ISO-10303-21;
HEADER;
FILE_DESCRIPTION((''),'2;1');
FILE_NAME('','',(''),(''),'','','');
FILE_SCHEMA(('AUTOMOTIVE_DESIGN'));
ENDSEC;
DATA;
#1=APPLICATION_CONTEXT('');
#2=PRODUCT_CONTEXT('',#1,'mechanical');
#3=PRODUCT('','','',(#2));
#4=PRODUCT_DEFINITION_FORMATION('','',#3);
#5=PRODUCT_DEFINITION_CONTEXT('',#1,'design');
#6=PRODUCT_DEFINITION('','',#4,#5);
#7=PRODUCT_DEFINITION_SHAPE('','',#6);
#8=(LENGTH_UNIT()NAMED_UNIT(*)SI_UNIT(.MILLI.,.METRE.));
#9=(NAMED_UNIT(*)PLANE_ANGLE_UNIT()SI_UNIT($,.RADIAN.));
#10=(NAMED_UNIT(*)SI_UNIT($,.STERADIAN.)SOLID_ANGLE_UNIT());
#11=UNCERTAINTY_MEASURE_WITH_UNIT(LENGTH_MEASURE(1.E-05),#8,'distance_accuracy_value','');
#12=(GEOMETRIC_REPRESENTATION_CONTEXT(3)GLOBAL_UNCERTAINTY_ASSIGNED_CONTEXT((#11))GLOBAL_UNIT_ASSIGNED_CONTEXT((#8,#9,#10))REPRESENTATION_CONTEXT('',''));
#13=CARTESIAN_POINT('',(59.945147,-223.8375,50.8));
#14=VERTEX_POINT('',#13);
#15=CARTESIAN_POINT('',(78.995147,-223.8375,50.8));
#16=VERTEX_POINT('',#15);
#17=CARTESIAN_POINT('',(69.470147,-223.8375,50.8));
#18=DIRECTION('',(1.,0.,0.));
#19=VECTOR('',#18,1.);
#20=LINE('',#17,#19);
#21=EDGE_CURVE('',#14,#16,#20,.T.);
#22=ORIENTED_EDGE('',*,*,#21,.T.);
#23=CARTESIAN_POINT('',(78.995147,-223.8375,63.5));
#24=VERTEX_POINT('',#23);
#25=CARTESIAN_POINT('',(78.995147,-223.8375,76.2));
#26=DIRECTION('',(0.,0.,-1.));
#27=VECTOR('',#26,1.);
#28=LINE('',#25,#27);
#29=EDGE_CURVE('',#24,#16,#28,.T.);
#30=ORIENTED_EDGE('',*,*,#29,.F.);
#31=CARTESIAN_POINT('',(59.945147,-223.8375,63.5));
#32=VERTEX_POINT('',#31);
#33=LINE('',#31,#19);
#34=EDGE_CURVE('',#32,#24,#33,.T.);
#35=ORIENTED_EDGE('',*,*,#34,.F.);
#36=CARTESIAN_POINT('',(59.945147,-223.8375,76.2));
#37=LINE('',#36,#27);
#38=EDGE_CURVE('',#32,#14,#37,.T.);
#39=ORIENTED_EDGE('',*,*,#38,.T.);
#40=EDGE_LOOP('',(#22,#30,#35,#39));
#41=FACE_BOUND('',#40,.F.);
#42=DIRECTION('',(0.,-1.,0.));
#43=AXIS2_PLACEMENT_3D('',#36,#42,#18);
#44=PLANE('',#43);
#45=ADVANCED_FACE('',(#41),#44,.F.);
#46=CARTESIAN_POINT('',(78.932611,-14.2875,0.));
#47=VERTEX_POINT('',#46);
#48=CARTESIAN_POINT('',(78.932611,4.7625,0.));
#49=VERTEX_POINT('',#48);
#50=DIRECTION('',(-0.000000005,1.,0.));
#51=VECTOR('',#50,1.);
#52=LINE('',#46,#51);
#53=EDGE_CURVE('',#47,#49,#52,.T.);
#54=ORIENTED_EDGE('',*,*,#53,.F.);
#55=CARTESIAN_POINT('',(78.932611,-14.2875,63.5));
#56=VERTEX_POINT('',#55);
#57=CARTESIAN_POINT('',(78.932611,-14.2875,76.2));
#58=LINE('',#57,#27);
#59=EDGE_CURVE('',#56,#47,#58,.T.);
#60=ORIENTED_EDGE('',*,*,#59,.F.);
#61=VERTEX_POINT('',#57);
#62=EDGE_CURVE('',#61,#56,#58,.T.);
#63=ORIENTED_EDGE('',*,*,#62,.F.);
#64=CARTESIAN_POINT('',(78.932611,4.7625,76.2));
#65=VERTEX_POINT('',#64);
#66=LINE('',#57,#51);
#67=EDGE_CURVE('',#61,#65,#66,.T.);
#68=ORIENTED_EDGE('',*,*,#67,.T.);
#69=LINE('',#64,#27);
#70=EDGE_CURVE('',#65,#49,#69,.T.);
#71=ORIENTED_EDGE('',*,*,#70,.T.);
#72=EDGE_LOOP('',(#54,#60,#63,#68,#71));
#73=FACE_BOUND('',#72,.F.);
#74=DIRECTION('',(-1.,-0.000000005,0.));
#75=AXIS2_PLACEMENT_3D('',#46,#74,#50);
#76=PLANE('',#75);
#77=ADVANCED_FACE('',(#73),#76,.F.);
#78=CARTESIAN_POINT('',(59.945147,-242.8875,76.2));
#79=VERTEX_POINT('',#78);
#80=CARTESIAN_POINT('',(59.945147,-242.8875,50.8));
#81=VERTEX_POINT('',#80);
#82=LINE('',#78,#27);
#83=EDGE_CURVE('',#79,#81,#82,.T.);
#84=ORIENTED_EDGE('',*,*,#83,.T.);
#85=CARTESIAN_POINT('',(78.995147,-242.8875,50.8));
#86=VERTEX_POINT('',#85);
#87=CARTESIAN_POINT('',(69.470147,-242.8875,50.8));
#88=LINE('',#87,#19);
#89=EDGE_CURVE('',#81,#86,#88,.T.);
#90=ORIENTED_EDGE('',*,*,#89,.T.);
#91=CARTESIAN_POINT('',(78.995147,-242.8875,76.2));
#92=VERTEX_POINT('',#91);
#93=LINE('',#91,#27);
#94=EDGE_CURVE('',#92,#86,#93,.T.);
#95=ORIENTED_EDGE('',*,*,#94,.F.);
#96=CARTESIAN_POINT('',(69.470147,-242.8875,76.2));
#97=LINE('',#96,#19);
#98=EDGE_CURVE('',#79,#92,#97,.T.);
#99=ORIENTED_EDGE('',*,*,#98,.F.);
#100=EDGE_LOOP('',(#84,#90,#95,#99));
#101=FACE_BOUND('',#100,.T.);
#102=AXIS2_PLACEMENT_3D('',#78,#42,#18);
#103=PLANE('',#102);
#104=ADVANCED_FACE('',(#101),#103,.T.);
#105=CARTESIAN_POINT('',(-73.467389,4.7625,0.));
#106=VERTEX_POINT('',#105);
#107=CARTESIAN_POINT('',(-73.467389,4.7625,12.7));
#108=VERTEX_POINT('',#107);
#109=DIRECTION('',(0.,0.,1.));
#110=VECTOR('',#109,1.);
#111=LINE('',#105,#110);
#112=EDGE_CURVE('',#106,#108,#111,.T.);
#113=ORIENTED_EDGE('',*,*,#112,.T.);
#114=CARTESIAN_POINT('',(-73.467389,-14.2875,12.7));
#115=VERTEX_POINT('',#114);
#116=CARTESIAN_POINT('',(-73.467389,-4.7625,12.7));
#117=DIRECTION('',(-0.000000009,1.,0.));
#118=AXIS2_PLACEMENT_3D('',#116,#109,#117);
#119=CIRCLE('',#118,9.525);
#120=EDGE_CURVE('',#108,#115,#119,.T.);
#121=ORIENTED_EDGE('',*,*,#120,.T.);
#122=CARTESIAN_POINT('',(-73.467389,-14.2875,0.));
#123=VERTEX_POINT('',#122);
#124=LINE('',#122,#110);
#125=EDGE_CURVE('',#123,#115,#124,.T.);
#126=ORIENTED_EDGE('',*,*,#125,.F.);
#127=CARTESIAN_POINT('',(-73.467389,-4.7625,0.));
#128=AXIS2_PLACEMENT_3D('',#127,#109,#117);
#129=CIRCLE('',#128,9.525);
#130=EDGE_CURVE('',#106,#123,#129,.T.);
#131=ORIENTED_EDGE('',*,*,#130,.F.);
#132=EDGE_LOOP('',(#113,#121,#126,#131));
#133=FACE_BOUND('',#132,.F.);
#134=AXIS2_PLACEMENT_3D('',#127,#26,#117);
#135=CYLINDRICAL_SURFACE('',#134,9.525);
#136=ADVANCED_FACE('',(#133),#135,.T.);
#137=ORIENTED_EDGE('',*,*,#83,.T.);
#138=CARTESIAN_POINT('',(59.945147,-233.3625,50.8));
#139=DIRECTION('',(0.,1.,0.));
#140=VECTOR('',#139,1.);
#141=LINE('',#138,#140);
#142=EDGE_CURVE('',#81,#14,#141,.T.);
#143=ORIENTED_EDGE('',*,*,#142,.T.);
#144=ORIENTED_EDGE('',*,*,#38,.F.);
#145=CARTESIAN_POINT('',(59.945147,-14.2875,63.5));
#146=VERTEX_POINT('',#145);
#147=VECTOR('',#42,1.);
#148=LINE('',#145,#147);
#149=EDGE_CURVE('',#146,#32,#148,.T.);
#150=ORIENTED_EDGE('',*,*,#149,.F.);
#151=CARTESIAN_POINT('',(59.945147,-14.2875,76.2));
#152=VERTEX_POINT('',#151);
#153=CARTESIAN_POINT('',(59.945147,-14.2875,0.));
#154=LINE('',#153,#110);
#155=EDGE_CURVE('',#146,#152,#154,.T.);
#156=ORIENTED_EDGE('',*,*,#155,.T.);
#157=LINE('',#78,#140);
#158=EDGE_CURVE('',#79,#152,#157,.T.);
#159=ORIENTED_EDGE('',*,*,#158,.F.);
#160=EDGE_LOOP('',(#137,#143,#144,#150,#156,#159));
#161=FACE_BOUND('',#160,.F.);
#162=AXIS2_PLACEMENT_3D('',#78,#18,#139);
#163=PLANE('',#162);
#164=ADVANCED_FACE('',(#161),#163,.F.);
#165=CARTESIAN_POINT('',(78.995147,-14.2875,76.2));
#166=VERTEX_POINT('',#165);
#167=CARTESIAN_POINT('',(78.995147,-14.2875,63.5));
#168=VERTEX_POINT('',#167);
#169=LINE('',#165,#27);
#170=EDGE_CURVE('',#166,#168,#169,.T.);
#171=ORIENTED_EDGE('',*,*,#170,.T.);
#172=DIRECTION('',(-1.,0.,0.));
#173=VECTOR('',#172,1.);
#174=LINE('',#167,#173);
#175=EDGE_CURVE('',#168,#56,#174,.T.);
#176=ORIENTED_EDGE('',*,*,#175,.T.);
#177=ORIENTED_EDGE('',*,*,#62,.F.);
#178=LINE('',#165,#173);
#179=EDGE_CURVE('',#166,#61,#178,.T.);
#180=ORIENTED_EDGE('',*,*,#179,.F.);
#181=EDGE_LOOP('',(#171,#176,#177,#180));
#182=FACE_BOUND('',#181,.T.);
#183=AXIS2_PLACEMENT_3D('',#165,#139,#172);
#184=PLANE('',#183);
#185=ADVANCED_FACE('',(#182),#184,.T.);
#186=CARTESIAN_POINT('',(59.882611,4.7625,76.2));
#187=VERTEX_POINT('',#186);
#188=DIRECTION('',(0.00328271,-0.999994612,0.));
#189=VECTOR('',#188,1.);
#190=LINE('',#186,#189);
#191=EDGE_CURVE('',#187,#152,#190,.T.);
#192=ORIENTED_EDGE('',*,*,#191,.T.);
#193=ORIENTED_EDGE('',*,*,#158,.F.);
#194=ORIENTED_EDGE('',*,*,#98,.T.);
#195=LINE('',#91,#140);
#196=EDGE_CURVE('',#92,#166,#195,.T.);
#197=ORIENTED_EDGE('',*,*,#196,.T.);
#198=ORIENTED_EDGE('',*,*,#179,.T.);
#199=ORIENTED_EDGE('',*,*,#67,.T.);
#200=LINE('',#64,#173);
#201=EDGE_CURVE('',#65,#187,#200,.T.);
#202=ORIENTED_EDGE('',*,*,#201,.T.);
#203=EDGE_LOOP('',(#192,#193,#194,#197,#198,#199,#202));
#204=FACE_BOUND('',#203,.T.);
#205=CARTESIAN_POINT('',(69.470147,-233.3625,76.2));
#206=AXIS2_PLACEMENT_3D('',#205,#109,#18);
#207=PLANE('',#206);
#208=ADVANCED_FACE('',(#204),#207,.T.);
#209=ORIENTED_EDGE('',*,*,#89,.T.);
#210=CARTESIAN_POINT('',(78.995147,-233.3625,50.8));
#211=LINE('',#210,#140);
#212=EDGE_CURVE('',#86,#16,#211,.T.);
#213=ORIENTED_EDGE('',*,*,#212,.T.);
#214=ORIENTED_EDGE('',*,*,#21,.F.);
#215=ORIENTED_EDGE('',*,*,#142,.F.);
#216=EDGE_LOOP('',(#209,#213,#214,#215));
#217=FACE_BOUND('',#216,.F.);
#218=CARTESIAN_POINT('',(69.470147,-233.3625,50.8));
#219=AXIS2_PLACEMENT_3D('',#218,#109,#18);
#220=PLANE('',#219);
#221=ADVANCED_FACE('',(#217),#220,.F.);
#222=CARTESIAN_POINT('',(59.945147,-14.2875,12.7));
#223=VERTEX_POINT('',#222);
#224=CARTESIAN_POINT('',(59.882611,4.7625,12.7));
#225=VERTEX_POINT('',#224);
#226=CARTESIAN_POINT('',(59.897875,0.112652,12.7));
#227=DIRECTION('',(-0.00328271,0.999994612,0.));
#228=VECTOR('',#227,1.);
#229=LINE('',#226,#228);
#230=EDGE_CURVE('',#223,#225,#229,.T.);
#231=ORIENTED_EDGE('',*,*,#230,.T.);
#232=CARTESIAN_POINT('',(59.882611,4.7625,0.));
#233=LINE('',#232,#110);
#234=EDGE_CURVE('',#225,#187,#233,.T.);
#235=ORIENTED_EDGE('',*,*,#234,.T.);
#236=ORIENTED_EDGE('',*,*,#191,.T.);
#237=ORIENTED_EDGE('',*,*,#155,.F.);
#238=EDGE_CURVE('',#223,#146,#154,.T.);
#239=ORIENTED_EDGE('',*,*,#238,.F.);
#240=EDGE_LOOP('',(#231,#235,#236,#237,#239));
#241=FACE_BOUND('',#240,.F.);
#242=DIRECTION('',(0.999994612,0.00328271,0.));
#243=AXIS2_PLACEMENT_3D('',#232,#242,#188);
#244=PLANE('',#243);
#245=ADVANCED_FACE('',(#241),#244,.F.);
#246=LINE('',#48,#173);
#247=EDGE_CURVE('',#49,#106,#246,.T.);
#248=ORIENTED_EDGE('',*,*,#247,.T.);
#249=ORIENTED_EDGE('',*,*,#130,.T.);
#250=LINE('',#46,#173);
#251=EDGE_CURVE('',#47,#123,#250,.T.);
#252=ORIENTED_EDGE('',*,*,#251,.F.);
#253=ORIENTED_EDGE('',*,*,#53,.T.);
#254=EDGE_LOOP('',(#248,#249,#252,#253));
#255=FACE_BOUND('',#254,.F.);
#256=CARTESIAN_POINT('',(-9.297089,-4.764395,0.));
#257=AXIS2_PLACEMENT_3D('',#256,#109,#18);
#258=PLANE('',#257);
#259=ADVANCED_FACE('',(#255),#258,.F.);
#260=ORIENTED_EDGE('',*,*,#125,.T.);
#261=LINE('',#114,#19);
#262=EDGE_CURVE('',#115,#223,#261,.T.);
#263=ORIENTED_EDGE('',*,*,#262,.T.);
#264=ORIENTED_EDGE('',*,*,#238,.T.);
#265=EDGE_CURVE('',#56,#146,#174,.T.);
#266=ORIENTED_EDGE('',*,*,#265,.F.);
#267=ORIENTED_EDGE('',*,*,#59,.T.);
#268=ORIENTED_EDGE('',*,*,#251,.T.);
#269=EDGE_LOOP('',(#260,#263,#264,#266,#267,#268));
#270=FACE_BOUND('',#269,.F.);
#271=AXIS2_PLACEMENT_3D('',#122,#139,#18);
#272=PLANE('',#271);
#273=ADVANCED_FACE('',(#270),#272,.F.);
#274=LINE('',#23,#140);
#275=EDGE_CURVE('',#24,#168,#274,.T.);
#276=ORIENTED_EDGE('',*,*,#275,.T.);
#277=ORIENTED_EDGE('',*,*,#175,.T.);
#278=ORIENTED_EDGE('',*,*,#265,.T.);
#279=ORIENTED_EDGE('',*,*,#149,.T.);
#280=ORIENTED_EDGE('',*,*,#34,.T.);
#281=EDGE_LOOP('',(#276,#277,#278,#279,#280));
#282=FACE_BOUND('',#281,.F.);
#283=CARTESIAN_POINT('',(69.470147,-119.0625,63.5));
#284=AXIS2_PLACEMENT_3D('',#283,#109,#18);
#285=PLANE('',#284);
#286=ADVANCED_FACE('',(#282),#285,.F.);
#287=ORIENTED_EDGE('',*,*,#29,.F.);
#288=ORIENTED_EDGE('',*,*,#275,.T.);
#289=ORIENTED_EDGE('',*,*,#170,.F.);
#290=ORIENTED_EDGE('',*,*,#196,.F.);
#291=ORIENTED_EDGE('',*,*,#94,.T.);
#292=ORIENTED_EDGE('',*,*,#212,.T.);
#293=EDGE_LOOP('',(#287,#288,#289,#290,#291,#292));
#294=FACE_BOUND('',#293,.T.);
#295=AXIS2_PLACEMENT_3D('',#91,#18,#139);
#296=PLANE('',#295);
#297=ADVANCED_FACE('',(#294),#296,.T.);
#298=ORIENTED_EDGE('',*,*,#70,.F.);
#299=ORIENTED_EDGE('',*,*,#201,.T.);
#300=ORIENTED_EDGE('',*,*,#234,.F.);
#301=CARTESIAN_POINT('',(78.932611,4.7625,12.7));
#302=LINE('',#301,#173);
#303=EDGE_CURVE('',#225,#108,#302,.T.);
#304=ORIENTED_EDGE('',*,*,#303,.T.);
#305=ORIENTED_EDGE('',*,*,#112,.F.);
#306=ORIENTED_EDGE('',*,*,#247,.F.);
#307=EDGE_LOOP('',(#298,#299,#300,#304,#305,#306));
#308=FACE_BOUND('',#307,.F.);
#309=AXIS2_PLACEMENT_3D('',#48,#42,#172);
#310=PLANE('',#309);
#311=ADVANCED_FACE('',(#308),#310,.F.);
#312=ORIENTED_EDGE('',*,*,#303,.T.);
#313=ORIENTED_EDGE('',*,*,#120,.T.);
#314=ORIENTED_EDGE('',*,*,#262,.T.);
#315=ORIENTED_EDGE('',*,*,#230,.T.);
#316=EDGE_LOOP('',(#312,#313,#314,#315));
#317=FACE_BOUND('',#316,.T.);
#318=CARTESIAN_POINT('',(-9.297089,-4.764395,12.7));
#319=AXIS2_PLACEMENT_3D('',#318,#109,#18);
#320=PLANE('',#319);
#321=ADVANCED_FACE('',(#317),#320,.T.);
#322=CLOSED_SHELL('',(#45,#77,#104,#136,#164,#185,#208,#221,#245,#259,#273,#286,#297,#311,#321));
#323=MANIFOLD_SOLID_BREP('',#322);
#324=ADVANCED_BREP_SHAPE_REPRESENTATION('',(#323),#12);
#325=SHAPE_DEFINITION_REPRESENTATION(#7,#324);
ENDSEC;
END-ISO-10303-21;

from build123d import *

# Parameters (mm, degrees)
F1_DEPTH = 12.7
F2_DEPTH = 76.2
F4_DEPTH = 12.7
F3_W     = 19.05
F3_H     = 19.05
F5_DEPTH = 25.4


# Not quite as in the source:
# - a feature names something its author has since deleted; it is built from what else it names


with BuildPart() as f1:
    # F0 (on Top) → F1 (new body)
    with BuildSketch(Plane.XY):
        with BuildLine():
            Line((59.8826112453, 4.7625), (-73.4673887547, 4.7625))
            ThreePointArc((-73.4673887547, 4.7625), (-82.9923886673, -4.7625000437), (-73.4673886673, -14.2875))
            Line((-73.4673886673, -14.2875), (59.9451471992, -14.2875))
            Line((59.9451471992, -14.2875), (59.8826112453, 4.7625))
        make_face()
        Polygon((78.9326112453, 4.7625), (59.8826112453, 4.7625), (59.9451471992, -14.2875), (78.9326113327, -14.2875), align=None)
    extrude(amount=F1_DEPTH)

    # F0 (on Top) → F2 (join)
    with BuildSketch(Plane.XY):
        Polygon((78.9326112453, 4.7625), (59.8826112453, 4.7625), (59.9451471992, -14.2875), (78.9326113327, -14.2875), align=None)
    extrude(amount=F2_DEPTH)

    # F3 (on face) → F4 (join)
    with BuildSketch(Plane.XY.offset(76.2)):
        Polygon((78.9326113327, -14.2875), (59.9451471992, -14.2875), (59.9451471992, -223.8375), (78.9951471992, -223.8375), (78.9951471992, -14.2875), align=None)
    extrude(amount=-F4_DEPTH)

    # F3 (on face) → F5 (join)
    with BuildSketch(Plane.XY.offset(76.2)):
        with Locations((69.4701471992, -233.3625)):
            Rectangle(F3_W, F3_H)
    extrude(amount=-F5_DEPTH)


with BuildPart() as f6_1:
    # F6: copy of F1
    add(f1.part)


solid = f1.part
